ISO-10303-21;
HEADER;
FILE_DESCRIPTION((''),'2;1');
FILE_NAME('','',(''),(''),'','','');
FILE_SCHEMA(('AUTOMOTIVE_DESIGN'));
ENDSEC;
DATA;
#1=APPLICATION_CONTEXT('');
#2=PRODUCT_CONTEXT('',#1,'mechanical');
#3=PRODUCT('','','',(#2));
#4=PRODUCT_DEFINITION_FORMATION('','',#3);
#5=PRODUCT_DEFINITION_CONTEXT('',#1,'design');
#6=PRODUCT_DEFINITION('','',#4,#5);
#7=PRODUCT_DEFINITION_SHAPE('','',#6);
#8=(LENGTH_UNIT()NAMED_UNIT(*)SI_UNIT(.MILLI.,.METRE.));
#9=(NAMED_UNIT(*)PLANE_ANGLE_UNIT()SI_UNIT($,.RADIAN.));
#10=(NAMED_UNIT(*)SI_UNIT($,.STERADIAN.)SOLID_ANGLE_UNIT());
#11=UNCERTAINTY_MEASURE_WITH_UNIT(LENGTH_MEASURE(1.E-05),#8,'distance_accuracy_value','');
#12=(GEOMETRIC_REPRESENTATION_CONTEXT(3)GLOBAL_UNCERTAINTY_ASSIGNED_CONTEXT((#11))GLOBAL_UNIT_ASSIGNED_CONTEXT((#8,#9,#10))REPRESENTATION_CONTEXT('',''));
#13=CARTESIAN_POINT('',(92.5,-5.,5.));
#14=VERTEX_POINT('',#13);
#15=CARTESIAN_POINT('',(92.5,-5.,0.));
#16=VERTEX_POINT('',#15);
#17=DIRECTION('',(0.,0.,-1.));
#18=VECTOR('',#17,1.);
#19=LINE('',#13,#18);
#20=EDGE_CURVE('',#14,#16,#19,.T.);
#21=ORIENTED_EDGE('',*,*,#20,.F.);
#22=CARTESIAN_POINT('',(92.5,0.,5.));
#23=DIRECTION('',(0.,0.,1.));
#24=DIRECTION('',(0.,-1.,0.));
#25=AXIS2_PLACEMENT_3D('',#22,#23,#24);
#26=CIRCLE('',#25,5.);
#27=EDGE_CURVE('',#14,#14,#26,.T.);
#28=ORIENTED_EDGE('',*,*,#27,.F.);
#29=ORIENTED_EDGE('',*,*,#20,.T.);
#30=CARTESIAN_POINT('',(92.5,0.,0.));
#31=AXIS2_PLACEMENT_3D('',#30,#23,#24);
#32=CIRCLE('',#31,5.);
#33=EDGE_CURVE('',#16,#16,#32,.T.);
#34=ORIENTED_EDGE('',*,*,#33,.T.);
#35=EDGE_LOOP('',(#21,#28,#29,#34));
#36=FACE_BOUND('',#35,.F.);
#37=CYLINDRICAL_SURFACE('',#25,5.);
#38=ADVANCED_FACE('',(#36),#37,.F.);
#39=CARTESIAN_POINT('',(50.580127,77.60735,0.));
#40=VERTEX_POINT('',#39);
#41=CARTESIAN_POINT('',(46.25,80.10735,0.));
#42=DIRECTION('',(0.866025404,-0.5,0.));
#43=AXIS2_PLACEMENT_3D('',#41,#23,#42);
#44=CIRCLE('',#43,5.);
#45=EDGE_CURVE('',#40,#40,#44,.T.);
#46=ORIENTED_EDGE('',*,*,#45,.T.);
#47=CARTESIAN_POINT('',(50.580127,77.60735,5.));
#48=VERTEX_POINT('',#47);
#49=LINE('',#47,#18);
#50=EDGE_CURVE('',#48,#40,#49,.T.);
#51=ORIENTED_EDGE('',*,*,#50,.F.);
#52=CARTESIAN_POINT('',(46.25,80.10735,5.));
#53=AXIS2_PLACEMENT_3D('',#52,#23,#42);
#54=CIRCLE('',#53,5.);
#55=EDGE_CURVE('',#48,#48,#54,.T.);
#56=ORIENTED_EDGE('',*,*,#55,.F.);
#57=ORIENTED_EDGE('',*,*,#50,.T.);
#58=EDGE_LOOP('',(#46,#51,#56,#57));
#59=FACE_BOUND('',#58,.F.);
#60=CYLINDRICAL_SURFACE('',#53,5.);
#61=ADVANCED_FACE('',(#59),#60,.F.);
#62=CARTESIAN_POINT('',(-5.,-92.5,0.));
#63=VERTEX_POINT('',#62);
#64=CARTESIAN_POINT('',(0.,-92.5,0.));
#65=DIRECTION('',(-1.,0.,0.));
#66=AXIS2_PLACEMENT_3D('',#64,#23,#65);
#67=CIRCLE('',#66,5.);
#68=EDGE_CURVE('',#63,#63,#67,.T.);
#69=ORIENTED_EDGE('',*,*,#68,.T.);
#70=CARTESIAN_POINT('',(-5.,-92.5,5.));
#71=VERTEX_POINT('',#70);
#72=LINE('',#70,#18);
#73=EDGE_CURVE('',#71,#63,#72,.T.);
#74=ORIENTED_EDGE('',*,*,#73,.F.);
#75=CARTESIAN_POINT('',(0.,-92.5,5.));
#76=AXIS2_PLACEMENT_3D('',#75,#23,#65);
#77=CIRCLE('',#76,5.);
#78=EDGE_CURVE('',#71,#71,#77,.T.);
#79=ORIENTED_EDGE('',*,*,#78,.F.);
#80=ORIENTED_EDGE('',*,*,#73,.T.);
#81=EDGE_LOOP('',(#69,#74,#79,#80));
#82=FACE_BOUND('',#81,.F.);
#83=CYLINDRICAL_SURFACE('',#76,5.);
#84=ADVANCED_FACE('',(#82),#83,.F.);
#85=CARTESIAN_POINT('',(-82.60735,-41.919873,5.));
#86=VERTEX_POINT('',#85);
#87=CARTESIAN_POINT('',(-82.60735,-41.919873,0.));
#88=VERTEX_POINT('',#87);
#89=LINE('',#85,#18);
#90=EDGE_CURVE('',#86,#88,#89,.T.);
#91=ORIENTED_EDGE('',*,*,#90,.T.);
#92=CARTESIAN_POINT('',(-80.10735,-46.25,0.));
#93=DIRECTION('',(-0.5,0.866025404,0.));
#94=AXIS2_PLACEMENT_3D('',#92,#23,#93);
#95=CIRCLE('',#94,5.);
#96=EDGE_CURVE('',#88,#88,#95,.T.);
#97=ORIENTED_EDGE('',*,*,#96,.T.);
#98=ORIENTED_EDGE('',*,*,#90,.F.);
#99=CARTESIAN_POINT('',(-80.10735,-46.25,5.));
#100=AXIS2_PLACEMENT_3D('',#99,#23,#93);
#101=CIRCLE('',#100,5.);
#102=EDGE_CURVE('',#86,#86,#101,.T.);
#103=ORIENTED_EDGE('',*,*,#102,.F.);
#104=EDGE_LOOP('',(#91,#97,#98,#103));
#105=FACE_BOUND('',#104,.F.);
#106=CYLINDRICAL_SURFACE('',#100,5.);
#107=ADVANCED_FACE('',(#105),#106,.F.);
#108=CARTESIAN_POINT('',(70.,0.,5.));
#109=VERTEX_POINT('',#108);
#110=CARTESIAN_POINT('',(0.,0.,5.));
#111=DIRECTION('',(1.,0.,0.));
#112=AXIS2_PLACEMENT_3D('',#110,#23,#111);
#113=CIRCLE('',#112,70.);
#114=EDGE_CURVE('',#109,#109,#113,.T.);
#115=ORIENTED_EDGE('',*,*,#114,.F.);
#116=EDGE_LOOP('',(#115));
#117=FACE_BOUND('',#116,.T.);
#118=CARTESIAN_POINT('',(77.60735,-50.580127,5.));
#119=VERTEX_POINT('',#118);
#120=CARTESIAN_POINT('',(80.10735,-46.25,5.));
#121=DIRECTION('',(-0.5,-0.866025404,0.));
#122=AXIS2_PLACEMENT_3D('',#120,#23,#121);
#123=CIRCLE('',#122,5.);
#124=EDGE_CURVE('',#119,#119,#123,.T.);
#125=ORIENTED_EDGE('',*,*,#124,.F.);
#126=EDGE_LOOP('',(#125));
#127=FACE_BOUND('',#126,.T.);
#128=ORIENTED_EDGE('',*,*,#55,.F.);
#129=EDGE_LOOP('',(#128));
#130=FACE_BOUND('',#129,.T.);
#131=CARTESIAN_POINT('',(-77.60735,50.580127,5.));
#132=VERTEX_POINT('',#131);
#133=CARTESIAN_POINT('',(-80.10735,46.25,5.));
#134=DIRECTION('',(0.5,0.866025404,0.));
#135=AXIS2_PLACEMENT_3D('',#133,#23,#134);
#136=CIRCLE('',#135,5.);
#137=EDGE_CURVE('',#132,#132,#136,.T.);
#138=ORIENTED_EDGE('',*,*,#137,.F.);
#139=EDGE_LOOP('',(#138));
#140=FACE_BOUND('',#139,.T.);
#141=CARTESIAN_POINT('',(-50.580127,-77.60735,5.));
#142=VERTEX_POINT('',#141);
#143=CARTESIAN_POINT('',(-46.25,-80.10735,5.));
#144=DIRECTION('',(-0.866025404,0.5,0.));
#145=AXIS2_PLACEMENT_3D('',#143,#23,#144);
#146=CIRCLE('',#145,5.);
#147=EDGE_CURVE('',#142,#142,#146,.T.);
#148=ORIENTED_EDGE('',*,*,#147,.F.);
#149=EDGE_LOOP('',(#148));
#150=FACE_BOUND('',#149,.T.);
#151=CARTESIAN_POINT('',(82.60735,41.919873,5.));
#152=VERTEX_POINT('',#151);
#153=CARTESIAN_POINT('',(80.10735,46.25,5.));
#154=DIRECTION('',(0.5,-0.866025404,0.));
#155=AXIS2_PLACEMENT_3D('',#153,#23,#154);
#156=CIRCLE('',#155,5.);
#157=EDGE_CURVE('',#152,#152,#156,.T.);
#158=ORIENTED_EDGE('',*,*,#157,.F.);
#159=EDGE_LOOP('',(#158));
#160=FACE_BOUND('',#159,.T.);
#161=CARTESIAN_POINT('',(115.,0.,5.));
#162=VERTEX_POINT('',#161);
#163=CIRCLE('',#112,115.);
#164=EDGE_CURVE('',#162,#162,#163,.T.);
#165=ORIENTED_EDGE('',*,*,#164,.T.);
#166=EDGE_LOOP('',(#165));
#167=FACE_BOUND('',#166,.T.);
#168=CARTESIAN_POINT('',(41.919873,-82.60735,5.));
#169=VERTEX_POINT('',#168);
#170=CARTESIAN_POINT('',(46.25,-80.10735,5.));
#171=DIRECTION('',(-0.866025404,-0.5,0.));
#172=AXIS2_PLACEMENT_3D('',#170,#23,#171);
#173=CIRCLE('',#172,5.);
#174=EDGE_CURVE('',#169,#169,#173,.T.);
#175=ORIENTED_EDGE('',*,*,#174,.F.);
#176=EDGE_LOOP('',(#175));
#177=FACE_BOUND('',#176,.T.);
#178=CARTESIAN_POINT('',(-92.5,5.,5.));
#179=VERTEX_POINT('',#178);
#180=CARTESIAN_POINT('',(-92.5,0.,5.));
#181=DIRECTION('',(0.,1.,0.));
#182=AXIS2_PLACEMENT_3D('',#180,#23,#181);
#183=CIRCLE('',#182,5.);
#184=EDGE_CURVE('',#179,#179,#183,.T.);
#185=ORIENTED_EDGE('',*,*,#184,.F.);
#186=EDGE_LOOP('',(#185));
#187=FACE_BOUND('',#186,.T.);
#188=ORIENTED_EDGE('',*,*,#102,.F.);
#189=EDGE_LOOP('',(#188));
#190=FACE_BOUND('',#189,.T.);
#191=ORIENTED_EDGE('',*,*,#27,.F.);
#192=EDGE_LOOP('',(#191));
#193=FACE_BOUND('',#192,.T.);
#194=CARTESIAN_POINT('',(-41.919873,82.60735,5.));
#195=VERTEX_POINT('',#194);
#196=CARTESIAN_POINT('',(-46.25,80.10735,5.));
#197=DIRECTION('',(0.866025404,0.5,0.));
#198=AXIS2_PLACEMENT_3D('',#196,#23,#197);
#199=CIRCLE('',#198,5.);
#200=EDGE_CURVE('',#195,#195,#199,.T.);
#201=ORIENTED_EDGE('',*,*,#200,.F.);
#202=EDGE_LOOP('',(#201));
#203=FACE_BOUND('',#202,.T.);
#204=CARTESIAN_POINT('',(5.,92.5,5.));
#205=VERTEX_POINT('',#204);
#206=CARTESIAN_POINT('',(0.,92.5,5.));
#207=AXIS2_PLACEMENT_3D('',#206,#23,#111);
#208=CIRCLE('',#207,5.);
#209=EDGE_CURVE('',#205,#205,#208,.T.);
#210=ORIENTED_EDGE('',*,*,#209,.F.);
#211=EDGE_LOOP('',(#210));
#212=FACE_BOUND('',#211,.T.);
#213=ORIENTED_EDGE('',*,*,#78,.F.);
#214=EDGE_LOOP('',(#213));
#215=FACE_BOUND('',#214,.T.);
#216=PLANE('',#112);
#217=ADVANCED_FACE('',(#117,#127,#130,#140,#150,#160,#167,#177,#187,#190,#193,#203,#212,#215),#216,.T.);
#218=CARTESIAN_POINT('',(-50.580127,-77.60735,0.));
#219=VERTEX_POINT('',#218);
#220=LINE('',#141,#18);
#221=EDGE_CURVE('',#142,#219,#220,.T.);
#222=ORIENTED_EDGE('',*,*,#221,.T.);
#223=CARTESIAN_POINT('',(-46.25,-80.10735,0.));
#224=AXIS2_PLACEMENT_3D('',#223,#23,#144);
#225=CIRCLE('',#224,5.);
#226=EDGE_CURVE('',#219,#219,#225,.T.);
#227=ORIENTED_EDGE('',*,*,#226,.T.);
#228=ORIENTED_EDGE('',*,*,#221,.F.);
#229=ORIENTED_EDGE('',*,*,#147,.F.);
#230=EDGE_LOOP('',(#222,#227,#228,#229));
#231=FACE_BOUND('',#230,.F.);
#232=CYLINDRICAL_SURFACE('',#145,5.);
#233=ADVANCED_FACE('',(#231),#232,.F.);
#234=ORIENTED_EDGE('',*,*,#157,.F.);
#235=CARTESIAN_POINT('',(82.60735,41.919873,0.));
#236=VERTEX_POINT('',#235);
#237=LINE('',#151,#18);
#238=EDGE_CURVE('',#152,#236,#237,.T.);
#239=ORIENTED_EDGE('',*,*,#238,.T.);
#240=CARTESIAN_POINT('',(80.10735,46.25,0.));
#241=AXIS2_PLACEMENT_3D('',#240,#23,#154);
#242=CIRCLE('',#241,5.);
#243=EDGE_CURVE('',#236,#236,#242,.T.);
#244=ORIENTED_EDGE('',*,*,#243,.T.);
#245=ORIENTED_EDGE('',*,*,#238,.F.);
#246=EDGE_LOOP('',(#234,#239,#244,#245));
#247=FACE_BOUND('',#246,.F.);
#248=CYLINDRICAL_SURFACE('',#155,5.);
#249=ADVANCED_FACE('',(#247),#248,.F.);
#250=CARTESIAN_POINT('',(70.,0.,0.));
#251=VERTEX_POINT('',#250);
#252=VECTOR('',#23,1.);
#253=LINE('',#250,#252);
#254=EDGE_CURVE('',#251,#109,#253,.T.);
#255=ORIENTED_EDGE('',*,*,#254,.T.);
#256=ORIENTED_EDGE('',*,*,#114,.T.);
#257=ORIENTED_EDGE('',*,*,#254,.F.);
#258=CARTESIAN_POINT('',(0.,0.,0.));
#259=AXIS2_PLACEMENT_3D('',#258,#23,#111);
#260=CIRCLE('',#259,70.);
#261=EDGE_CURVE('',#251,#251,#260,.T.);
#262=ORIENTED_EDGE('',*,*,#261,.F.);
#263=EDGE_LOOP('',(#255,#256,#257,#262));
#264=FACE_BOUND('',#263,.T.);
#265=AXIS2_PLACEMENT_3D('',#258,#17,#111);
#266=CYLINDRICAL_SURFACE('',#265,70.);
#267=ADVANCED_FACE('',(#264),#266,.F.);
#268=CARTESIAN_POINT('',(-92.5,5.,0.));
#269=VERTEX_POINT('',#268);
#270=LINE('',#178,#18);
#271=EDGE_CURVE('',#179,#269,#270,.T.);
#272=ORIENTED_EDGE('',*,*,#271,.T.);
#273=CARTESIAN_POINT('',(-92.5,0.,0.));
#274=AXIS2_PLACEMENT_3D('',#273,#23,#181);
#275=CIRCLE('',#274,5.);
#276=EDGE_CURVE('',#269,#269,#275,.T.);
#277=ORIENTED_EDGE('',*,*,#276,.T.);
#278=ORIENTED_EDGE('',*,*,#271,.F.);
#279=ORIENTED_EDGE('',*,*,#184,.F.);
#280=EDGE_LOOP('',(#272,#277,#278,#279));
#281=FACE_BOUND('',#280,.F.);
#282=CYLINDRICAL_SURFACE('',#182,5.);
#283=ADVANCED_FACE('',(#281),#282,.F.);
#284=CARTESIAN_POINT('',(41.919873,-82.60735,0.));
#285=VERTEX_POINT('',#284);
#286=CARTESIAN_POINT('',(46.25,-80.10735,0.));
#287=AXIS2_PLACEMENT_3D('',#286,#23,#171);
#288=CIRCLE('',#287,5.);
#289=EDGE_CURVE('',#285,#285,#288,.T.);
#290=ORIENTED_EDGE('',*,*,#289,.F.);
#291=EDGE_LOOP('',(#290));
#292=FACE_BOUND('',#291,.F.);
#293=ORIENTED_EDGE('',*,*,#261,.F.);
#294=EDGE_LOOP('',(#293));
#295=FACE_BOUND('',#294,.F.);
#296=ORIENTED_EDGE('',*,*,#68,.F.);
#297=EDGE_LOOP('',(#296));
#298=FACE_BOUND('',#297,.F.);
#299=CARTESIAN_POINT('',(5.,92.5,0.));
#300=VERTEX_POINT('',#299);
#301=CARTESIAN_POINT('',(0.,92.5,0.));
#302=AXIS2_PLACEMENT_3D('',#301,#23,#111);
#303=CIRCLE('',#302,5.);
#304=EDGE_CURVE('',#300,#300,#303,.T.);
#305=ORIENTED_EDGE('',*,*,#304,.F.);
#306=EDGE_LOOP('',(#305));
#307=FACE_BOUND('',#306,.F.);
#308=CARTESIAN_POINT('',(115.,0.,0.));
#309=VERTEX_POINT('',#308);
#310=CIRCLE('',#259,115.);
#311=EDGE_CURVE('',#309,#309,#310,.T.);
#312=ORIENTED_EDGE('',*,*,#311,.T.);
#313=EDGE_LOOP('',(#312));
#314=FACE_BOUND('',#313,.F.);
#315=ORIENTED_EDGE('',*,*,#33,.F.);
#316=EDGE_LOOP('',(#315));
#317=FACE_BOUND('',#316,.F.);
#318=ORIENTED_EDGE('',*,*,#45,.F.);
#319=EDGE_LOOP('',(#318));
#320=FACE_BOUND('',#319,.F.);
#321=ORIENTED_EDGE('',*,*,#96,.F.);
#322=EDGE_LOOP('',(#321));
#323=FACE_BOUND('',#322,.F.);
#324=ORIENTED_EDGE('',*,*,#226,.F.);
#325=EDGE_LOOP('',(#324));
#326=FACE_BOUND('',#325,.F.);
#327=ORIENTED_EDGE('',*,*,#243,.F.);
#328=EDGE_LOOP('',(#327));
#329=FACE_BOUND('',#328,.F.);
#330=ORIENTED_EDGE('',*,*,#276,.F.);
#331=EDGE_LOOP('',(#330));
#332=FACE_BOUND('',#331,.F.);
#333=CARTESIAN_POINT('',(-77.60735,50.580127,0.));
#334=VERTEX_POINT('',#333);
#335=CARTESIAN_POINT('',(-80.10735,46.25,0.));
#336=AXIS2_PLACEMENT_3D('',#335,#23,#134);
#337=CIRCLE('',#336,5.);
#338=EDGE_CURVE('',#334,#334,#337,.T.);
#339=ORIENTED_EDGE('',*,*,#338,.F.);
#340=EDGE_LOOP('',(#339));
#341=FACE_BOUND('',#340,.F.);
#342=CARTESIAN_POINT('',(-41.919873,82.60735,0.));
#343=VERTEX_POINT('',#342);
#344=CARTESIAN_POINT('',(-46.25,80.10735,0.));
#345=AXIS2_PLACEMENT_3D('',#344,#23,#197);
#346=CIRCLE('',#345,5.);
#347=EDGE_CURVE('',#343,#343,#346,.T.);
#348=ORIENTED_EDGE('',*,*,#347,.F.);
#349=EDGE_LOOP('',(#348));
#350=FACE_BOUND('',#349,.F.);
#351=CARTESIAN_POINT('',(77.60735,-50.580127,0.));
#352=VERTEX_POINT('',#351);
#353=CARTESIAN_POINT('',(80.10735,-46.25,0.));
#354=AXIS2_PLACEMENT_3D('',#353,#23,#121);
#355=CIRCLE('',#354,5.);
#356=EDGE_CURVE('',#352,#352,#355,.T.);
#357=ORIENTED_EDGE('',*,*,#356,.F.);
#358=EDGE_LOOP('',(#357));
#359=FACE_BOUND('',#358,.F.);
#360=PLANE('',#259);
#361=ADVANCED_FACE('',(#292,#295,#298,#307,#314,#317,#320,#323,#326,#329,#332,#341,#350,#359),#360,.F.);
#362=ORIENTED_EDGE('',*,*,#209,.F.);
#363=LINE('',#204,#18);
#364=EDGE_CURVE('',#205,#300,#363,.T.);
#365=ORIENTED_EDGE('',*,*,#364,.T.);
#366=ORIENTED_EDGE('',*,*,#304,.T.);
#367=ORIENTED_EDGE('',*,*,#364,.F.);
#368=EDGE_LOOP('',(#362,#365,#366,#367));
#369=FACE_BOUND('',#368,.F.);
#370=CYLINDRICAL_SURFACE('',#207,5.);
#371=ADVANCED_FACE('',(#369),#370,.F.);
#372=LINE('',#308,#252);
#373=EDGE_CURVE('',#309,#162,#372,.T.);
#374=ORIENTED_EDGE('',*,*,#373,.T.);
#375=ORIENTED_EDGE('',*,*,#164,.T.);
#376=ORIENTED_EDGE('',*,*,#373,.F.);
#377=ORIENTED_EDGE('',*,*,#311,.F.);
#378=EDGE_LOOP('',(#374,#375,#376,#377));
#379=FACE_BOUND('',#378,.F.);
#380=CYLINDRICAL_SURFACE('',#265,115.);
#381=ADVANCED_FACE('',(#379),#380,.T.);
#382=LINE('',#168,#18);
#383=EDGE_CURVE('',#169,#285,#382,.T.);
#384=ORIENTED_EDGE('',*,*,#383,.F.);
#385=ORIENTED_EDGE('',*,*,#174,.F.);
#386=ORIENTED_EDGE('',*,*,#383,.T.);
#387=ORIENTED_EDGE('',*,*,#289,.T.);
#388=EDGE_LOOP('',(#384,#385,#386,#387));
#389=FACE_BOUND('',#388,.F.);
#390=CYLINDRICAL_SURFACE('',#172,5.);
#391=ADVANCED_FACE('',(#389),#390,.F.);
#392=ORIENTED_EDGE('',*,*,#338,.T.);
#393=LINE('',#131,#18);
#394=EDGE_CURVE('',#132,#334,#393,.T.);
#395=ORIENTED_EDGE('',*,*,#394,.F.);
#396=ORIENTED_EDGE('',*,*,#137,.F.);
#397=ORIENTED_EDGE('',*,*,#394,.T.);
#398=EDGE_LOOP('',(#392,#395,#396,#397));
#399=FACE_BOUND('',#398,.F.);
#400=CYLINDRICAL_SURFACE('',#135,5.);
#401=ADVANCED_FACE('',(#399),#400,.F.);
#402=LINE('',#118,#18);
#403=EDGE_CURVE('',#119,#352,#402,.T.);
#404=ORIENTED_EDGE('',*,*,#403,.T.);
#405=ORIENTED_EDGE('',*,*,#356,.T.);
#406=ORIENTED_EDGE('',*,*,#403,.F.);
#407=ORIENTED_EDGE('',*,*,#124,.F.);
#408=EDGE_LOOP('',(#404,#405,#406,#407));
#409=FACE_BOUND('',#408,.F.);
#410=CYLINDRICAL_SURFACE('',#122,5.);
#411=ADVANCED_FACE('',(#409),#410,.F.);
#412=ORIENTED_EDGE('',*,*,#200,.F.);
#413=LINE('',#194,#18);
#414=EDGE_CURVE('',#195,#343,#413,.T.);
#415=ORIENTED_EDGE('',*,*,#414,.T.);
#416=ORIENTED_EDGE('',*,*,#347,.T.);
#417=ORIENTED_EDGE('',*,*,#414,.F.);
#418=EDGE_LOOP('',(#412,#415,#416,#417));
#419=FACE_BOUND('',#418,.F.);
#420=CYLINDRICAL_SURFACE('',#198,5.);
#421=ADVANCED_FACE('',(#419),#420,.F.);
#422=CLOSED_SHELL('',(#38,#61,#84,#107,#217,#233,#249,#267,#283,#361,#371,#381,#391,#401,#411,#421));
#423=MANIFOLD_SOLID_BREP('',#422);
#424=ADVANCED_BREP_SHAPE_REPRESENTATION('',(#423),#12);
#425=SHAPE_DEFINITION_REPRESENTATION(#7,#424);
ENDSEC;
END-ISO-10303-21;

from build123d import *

# Parameters (mm, degrees)
F0_R            = 115
F0_R_2          = 70
F1_DEPTH        = 5
F2_R            = 5
F3_DEPTH        = 25
F3_COPIES_COUNT = 12


# Not quite as in the source:
# - a pattern or mirror of a feature is missing from the dataset's text; its kind, count and spacing are read off the source's solid


with BuildPart() as f1:
    # F0 (on Top) → F1 (new body)
    with BuildSketch(Plane.XY):
        Circle(F0_R)
        Circle(F0_R_2, mode=Mode.SUBTRACT)
    extrude(amount=F1_DEPTH)

    # F2 (on face) → F3 (cut)
    with BuildSketch(Plane.XY.offset(5)):
        with Locations((0, 92.5)):
            Circle(F2_R)
    f3 = extrude(amount=-F3_DEPTH, mode=Mode.SUBTRACT)

    # F3_copies: F3 ×12 about axis
    f3_copies_axis = Axis((0, 0, 0), (0, 0, 1))
    for i in range(1, F3_COPIES_COUNT):
        add(f3.rotate(f3_copies_axis, i * 360 / F3_COPIES_COUNT), mode=Mode.SUBTRACT)


solid = f1.part
